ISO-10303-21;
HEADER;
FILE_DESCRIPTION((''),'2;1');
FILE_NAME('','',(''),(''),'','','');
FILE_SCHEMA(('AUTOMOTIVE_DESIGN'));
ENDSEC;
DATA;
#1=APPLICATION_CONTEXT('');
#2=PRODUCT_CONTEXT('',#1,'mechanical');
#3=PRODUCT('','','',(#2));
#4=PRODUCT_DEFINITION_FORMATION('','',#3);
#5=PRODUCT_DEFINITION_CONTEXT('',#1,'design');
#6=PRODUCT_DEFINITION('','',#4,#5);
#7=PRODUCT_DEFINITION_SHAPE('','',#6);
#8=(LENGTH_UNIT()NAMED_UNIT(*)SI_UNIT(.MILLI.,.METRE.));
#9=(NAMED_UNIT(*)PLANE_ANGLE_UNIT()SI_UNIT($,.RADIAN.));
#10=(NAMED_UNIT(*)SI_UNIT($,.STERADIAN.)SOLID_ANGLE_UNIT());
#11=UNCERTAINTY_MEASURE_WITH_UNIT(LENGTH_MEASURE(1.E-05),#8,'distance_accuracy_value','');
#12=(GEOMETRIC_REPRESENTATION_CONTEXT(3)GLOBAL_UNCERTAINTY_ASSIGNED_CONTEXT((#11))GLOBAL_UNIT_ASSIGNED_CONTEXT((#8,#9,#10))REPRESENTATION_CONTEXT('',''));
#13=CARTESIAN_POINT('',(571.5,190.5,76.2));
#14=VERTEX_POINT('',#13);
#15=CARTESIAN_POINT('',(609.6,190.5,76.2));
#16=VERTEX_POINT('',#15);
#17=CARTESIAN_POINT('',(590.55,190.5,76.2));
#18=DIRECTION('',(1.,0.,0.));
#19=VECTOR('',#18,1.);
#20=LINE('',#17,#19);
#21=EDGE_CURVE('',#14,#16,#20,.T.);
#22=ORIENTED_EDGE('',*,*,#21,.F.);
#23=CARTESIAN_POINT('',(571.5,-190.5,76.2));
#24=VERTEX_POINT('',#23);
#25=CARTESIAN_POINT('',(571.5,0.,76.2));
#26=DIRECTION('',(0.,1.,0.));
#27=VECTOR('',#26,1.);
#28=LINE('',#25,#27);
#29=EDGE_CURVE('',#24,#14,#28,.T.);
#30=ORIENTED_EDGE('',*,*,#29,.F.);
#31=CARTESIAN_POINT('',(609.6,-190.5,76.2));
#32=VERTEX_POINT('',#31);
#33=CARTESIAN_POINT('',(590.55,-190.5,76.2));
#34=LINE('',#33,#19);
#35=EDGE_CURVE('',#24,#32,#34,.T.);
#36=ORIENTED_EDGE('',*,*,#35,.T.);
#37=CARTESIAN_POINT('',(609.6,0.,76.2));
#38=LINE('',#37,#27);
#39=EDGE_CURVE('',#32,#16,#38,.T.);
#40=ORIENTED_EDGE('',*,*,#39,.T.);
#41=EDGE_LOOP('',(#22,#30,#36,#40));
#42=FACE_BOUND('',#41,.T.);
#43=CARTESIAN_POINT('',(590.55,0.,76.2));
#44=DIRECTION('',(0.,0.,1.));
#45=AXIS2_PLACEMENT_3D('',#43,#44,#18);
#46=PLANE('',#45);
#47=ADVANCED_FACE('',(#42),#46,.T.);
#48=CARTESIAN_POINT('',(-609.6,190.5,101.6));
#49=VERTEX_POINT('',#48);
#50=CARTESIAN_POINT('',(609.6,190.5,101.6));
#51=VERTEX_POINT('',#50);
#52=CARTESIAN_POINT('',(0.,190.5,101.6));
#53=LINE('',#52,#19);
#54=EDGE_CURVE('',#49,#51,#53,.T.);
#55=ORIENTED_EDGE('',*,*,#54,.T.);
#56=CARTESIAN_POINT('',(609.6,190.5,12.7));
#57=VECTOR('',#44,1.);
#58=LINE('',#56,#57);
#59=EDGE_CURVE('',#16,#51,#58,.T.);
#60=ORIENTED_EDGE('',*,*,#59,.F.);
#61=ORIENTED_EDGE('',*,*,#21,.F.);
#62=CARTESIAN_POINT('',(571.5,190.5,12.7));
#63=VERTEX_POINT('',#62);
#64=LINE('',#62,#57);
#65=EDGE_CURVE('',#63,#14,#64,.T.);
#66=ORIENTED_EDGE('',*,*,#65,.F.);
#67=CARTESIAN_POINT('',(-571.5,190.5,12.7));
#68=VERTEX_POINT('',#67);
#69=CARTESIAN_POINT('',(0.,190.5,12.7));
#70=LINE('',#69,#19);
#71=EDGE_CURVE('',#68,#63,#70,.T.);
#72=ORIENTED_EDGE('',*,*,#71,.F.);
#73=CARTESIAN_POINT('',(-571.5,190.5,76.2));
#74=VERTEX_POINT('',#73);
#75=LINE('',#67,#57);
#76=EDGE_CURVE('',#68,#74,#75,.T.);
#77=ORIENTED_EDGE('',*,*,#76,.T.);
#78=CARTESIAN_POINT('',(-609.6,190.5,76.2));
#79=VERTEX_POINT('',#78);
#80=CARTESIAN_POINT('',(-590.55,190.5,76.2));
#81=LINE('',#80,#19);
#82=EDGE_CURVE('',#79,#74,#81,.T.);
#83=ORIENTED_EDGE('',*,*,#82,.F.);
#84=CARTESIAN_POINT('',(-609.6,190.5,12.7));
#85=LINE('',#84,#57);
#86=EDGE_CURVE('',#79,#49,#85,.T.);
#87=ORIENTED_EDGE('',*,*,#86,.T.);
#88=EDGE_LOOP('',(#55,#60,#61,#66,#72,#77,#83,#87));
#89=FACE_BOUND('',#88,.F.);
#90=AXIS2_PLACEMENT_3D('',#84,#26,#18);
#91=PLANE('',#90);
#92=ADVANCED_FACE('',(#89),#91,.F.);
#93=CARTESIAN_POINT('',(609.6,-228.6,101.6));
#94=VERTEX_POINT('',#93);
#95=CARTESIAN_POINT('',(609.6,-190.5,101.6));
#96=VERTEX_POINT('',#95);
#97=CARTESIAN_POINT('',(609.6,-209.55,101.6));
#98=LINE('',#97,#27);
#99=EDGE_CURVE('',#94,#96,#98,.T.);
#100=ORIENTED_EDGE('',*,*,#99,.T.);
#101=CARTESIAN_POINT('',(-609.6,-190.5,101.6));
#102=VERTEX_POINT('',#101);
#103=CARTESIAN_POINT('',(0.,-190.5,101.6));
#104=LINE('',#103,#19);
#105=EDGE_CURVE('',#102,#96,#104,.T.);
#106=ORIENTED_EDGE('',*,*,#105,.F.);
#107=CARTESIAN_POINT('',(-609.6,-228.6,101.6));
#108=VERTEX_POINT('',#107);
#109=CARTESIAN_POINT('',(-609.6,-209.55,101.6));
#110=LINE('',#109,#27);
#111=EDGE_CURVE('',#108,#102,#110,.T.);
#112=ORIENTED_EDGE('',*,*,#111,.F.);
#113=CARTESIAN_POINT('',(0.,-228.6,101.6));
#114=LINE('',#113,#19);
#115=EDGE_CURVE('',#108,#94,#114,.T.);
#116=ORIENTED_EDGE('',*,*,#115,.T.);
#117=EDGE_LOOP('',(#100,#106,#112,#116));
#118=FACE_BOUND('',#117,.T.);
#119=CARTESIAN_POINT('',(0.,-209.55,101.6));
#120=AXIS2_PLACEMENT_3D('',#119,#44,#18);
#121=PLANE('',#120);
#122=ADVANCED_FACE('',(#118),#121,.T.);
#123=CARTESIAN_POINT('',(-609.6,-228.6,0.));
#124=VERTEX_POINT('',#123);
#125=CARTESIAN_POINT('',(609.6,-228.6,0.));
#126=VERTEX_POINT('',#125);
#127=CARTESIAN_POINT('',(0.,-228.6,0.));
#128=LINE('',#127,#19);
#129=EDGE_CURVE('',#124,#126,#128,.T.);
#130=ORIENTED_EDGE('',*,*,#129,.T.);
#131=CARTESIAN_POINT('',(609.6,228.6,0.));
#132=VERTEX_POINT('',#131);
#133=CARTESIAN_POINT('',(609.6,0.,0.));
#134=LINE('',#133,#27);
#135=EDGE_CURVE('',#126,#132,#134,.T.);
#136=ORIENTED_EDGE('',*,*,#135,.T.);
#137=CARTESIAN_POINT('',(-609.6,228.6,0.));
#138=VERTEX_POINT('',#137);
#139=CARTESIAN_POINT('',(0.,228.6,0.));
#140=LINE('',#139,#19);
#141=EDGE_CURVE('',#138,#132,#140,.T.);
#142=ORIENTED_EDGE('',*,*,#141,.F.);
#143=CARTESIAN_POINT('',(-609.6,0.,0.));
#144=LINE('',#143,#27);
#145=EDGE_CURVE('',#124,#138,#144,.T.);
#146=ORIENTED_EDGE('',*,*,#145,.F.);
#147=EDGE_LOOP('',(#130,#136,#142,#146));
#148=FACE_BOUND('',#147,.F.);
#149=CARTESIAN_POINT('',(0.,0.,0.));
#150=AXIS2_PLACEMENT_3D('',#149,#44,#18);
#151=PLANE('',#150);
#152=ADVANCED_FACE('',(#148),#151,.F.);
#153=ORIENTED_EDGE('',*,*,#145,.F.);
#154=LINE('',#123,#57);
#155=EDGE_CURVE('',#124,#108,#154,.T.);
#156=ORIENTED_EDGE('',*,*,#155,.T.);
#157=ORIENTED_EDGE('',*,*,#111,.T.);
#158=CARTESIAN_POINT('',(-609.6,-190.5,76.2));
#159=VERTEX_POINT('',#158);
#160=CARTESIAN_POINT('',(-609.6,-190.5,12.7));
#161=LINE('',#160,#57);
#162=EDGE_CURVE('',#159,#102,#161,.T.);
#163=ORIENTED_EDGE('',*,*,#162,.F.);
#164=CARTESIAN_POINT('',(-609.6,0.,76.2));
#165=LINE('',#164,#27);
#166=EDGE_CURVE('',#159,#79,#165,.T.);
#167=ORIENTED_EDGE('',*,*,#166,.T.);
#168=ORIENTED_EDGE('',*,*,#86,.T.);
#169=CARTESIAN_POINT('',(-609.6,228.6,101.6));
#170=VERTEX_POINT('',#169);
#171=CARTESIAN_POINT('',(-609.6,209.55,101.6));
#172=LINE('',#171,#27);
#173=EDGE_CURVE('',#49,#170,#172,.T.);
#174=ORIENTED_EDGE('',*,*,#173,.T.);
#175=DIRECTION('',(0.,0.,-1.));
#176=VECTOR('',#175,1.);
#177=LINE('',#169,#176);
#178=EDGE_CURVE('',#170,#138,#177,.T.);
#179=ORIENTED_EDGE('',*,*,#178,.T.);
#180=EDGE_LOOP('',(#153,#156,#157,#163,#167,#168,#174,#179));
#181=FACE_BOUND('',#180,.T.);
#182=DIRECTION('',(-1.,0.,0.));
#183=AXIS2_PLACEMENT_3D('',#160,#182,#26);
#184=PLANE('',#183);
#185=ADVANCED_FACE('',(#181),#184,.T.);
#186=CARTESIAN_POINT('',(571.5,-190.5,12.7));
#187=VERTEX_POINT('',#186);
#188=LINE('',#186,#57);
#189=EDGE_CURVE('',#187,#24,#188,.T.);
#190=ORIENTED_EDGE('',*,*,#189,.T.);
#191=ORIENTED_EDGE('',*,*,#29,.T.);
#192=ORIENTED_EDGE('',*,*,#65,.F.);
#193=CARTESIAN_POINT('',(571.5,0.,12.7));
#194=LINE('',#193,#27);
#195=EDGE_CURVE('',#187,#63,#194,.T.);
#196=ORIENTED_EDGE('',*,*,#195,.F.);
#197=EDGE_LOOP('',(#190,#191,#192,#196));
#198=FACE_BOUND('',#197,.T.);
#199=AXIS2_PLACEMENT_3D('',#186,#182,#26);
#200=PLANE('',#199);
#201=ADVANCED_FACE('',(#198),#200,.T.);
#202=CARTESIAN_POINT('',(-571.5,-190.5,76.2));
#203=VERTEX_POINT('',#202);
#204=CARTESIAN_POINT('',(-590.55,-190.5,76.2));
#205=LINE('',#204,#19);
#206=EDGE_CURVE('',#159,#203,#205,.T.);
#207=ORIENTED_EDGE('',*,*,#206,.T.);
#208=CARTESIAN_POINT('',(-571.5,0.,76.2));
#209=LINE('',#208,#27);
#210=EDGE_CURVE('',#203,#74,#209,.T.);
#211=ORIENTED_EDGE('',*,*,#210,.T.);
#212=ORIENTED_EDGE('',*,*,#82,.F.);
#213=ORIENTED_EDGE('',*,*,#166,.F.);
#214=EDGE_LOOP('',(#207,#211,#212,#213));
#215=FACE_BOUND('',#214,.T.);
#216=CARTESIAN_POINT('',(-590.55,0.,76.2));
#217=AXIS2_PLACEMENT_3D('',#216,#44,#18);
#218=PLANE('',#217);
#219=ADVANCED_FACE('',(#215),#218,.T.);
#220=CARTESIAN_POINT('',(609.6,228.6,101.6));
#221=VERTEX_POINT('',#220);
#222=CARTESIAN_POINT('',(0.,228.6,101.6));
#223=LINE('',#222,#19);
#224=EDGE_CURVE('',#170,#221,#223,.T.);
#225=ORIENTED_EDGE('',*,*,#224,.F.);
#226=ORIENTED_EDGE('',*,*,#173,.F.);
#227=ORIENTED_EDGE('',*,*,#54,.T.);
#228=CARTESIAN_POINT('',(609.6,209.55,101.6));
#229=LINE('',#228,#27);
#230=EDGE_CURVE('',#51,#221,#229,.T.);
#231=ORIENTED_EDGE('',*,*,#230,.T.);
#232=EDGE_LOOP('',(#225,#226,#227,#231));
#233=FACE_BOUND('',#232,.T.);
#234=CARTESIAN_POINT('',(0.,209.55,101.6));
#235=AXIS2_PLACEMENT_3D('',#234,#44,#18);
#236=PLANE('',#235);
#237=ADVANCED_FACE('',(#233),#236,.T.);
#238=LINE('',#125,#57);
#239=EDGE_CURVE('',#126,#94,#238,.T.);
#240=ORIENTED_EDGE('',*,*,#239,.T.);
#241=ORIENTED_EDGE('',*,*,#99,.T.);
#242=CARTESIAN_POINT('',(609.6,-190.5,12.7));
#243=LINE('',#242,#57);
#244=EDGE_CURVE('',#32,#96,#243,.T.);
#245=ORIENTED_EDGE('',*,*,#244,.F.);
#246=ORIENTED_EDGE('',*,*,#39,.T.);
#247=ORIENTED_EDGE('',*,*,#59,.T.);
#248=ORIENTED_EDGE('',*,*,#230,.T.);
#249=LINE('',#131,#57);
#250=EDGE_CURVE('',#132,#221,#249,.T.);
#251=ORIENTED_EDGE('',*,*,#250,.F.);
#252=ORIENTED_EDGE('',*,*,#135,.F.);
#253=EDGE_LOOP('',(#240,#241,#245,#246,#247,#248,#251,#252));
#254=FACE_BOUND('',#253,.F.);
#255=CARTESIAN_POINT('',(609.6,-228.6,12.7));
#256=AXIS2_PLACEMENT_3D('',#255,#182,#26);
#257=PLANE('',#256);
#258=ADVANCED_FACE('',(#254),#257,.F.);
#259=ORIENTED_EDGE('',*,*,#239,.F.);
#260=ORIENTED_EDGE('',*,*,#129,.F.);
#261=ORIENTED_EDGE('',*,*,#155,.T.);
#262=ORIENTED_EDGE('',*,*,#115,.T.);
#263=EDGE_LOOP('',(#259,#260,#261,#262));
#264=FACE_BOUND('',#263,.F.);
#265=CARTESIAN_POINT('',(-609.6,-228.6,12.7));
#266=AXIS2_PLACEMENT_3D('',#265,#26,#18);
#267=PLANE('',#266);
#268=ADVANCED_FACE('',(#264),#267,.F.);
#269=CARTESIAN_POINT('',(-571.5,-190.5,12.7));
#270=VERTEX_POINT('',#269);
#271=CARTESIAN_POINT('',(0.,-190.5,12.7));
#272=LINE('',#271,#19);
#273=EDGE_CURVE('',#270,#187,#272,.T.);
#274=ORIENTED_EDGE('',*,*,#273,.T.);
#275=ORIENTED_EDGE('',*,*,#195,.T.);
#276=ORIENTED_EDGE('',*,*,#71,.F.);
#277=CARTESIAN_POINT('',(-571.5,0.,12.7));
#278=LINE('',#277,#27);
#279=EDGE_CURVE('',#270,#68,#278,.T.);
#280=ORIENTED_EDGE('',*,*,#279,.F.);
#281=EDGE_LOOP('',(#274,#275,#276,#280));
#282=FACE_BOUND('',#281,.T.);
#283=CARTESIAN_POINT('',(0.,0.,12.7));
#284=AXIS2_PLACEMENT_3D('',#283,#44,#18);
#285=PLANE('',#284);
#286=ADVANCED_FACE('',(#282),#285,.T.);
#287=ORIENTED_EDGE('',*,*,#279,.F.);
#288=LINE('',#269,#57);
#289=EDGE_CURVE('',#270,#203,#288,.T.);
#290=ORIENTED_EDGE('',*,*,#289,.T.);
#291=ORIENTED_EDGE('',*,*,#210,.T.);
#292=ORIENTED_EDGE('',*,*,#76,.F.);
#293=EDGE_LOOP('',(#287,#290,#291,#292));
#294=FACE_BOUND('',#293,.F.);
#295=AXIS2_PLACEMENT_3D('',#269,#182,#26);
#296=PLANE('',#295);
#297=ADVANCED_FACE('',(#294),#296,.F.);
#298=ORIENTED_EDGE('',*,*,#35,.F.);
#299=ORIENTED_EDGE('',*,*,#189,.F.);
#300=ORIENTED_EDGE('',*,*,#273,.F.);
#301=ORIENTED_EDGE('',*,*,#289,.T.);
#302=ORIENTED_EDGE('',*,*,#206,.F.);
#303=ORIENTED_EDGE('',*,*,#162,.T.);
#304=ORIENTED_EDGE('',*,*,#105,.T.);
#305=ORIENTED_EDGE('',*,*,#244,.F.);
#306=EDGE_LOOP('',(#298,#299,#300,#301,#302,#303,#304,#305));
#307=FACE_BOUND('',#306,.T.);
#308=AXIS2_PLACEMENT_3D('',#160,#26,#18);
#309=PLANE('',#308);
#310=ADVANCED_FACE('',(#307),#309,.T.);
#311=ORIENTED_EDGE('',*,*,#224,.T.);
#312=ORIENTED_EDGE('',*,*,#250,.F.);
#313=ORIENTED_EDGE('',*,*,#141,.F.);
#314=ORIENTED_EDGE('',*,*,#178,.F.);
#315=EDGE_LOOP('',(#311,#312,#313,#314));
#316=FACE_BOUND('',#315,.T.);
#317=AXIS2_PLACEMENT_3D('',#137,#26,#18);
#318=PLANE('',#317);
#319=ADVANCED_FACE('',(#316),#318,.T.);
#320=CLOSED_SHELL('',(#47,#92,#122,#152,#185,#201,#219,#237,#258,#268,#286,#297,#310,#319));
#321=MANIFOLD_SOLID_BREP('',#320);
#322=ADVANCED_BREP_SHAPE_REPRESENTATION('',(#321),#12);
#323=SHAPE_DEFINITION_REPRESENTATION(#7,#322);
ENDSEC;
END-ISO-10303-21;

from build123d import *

# Parameters (mm, degrees)
F0_W     = 1219.2
F0_H     = 457.2
F1_DEPTH = 12.7
F2_W     = 1219.2
F2_H     = 38.1
F3_DEPTH = 88.9
F4_W     = 38.1
F4_H     = 381
F5_DEPTH = 63.5


# Not quite as in the source:
# - a length typed as a fraction of an inch, garbled in the dataset ("3 / 203.2 mm" for 3/8 in), is restored


with BuildPart() as f1:
    # F0 (on Top) → F1 (new body)
    with BuildSketch(Plane.XY):
        Rectangle(F0_W, F0_H)
    extrude(amount=F1_DEPTH)

    # F2 (on face) → F3 (join)
    with BuildSketch(Plane.XY.offset(12.7)):
        with Locations((0, -209.55)):
            Rectangle(F2_W, F2_H)
        with Locations((0, 209.55)):
            Rectangle(F2_W, F2_H)
    extrude(amount=F3_DEPTH)

    # F4 (on face) → F5 (join)
    with BuildSketch(Plane.XY.offset(12.7)):
        with Locations((-590.55, 0)):
            Rectangle(F4_W, F4_H)
        with Locations((590.55, 0)):
            Rectangle(F4_W, F4_H)
    extrude(amount=F5_DEPTH)


solid = f1.part
